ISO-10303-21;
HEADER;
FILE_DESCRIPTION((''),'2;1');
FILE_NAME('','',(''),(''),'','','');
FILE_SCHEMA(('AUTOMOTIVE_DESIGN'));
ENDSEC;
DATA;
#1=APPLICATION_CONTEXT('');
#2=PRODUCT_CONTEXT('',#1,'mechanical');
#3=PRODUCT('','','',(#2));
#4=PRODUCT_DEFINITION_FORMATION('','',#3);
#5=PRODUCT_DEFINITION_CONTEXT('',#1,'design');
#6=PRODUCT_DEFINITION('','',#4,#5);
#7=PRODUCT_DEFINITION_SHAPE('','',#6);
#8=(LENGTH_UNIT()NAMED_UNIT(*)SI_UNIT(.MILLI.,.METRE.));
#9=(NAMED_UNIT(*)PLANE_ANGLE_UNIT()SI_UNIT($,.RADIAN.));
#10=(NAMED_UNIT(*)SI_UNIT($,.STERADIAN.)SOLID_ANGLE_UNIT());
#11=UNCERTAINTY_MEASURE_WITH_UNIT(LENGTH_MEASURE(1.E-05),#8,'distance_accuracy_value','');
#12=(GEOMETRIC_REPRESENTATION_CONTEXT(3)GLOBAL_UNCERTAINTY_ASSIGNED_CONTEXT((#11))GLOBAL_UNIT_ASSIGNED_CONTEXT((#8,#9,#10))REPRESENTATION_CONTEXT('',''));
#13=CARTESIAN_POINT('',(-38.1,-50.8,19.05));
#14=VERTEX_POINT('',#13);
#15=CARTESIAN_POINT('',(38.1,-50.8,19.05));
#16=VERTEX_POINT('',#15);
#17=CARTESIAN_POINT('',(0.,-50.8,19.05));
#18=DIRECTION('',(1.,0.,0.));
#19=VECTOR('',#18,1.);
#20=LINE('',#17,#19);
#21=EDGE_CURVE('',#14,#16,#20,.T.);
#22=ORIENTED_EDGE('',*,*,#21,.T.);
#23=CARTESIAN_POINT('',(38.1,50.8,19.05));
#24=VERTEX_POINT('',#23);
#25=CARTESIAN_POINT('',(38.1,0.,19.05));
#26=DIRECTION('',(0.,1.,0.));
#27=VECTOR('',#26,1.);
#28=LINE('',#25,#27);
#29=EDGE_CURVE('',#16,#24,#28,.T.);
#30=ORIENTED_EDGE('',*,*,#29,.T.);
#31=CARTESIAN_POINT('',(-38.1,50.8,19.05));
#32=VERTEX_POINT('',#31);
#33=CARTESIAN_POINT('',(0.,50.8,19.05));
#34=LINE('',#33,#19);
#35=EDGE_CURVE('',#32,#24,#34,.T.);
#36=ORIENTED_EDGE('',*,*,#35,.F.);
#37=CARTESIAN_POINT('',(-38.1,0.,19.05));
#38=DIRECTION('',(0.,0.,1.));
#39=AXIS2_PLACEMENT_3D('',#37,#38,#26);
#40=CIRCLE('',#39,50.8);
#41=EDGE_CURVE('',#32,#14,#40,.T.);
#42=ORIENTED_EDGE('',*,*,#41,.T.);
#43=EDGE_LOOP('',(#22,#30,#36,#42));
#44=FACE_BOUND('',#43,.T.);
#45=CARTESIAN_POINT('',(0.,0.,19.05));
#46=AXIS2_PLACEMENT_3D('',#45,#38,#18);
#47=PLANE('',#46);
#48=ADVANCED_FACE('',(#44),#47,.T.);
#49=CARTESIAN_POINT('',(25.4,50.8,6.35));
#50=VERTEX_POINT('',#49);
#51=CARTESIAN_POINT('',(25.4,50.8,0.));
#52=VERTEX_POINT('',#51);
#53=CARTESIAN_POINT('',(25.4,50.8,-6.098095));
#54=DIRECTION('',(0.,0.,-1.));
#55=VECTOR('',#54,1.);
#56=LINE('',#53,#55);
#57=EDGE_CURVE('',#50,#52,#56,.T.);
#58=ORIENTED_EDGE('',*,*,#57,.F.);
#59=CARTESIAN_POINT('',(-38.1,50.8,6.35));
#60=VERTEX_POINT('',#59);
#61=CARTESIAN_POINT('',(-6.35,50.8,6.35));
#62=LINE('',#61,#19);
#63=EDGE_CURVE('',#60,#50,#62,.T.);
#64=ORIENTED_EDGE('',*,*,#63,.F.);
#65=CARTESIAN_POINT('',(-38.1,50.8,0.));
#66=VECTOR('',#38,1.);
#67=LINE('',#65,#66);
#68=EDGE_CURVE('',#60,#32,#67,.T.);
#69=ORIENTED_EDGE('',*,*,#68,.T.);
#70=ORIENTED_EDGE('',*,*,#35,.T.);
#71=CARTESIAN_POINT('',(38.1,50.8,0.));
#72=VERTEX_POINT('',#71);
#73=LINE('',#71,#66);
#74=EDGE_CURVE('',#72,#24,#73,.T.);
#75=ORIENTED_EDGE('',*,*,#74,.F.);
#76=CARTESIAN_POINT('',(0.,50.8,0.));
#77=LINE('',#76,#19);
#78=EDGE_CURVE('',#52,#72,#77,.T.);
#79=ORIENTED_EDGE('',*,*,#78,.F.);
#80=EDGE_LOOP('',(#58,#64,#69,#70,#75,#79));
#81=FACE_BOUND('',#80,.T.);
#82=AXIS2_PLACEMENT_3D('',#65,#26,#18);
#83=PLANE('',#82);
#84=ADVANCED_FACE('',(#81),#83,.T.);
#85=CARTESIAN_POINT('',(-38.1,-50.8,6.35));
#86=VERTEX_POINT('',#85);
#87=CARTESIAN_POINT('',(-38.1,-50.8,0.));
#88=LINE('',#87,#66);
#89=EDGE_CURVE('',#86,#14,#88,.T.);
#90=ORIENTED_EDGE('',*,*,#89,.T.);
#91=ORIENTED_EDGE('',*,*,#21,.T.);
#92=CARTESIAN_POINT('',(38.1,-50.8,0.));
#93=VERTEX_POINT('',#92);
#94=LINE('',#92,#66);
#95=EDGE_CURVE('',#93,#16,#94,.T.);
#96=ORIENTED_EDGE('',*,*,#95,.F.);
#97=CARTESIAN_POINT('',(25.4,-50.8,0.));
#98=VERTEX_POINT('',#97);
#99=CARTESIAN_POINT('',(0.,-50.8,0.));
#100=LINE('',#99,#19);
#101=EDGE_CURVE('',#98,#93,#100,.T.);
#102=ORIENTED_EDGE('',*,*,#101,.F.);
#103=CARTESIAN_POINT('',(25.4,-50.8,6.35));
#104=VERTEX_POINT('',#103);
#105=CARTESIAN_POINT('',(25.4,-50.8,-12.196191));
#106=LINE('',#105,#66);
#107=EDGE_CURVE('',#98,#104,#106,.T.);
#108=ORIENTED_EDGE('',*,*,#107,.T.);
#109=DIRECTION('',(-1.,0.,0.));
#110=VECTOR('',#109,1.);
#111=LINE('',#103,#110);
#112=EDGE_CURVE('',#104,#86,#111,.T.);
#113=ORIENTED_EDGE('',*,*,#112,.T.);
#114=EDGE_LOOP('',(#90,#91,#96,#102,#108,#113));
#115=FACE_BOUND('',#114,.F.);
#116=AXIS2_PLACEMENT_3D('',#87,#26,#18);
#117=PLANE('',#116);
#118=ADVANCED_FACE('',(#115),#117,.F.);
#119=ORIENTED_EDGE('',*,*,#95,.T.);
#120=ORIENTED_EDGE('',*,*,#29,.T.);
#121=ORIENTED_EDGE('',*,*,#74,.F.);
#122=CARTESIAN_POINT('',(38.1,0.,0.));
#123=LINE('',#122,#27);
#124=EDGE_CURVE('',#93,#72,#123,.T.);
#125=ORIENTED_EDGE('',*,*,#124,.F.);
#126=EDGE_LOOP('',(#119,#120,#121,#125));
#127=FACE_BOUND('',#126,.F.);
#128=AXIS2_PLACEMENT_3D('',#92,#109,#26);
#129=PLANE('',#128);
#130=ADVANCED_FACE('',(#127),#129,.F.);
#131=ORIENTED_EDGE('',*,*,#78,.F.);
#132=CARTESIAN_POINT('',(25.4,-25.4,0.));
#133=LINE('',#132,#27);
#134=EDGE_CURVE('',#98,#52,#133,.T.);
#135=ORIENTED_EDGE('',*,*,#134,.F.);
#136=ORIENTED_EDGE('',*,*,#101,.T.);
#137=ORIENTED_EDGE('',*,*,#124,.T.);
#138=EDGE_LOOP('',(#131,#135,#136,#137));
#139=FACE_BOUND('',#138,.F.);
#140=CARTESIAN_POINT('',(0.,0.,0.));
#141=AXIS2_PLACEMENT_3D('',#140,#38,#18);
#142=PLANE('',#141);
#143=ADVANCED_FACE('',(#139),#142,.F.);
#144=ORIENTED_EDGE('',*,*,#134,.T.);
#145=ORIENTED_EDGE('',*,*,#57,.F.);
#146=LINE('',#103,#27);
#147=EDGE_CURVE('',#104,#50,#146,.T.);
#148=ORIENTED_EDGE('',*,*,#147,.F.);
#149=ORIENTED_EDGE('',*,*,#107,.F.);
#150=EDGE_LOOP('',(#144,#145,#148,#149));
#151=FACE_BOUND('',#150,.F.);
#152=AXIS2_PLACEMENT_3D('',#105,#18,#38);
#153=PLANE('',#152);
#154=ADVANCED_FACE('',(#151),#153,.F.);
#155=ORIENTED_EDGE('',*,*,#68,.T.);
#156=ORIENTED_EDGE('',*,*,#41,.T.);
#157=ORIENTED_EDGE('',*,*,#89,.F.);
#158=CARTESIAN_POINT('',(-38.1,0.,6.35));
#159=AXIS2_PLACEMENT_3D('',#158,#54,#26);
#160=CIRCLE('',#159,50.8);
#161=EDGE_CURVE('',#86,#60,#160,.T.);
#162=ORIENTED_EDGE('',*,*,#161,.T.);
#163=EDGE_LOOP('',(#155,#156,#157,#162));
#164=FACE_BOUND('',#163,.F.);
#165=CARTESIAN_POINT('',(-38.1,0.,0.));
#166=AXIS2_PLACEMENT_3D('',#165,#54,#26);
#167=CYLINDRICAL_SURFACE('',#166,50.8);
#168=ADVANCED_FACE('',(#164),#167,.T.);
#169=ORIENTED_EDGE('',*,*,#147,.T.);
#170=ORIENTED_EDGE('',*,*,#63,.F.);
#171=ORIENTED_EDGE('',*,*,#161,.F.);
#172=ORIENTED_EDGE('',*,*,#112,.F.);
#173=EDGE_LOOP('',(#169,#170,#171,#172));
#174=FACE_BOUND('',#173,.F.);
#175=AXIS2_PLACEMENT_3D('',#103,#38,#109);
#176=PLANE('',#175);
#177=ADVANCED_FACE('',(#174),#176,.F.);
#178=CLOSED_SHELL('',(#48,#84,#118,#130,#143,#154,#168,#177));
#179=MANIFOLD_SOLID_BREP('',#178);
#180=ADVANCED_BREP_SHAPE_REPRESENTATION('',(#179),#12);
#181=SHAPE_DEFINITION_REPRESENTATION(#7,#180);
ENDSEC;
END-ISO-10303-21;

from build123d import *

# Parameters (mm, degrees)
F0_W     = 76.2
F0_H     = 101.6
F1_DEPTH = 19.05
F2_W     = 63.5
F2_H     = 6.35
F3_DEPTH = 164.846


with BuildPart() as f1:
    # F0 (on Top) → F1 (new body)
    with BuildSketch(Plane.XY):
        Rectangle(F0_W, F0_H)
        with BuildLine():
            ThreePointArc((-38.1, 50.8), (-88.9, 0), (-38.1, -50.8))
            Line((-38.1, -50.8), (-38.1, 50.8))
        make_face()
    extrude(amount=F1_DEPTH)

    # F2 (on face) → F3 (cut)
    with BuildSketch(Plane.XZ.offset(50.8)):
        with Locations((-6.35, 3.175)):
            Rectangle(F2_W, F2_H)
        Polygon((25.4, -12.1961906552), (25.4, 0), (-38.1, 0), (-38.1, 6.35), (-98.2422232628, 6.35), (-98.2422232628, -12.1961906552), align=None)
    extrude(amount=-F3_DEPTH, mode=Mode.SUBTRACT)


solid = f1.part
